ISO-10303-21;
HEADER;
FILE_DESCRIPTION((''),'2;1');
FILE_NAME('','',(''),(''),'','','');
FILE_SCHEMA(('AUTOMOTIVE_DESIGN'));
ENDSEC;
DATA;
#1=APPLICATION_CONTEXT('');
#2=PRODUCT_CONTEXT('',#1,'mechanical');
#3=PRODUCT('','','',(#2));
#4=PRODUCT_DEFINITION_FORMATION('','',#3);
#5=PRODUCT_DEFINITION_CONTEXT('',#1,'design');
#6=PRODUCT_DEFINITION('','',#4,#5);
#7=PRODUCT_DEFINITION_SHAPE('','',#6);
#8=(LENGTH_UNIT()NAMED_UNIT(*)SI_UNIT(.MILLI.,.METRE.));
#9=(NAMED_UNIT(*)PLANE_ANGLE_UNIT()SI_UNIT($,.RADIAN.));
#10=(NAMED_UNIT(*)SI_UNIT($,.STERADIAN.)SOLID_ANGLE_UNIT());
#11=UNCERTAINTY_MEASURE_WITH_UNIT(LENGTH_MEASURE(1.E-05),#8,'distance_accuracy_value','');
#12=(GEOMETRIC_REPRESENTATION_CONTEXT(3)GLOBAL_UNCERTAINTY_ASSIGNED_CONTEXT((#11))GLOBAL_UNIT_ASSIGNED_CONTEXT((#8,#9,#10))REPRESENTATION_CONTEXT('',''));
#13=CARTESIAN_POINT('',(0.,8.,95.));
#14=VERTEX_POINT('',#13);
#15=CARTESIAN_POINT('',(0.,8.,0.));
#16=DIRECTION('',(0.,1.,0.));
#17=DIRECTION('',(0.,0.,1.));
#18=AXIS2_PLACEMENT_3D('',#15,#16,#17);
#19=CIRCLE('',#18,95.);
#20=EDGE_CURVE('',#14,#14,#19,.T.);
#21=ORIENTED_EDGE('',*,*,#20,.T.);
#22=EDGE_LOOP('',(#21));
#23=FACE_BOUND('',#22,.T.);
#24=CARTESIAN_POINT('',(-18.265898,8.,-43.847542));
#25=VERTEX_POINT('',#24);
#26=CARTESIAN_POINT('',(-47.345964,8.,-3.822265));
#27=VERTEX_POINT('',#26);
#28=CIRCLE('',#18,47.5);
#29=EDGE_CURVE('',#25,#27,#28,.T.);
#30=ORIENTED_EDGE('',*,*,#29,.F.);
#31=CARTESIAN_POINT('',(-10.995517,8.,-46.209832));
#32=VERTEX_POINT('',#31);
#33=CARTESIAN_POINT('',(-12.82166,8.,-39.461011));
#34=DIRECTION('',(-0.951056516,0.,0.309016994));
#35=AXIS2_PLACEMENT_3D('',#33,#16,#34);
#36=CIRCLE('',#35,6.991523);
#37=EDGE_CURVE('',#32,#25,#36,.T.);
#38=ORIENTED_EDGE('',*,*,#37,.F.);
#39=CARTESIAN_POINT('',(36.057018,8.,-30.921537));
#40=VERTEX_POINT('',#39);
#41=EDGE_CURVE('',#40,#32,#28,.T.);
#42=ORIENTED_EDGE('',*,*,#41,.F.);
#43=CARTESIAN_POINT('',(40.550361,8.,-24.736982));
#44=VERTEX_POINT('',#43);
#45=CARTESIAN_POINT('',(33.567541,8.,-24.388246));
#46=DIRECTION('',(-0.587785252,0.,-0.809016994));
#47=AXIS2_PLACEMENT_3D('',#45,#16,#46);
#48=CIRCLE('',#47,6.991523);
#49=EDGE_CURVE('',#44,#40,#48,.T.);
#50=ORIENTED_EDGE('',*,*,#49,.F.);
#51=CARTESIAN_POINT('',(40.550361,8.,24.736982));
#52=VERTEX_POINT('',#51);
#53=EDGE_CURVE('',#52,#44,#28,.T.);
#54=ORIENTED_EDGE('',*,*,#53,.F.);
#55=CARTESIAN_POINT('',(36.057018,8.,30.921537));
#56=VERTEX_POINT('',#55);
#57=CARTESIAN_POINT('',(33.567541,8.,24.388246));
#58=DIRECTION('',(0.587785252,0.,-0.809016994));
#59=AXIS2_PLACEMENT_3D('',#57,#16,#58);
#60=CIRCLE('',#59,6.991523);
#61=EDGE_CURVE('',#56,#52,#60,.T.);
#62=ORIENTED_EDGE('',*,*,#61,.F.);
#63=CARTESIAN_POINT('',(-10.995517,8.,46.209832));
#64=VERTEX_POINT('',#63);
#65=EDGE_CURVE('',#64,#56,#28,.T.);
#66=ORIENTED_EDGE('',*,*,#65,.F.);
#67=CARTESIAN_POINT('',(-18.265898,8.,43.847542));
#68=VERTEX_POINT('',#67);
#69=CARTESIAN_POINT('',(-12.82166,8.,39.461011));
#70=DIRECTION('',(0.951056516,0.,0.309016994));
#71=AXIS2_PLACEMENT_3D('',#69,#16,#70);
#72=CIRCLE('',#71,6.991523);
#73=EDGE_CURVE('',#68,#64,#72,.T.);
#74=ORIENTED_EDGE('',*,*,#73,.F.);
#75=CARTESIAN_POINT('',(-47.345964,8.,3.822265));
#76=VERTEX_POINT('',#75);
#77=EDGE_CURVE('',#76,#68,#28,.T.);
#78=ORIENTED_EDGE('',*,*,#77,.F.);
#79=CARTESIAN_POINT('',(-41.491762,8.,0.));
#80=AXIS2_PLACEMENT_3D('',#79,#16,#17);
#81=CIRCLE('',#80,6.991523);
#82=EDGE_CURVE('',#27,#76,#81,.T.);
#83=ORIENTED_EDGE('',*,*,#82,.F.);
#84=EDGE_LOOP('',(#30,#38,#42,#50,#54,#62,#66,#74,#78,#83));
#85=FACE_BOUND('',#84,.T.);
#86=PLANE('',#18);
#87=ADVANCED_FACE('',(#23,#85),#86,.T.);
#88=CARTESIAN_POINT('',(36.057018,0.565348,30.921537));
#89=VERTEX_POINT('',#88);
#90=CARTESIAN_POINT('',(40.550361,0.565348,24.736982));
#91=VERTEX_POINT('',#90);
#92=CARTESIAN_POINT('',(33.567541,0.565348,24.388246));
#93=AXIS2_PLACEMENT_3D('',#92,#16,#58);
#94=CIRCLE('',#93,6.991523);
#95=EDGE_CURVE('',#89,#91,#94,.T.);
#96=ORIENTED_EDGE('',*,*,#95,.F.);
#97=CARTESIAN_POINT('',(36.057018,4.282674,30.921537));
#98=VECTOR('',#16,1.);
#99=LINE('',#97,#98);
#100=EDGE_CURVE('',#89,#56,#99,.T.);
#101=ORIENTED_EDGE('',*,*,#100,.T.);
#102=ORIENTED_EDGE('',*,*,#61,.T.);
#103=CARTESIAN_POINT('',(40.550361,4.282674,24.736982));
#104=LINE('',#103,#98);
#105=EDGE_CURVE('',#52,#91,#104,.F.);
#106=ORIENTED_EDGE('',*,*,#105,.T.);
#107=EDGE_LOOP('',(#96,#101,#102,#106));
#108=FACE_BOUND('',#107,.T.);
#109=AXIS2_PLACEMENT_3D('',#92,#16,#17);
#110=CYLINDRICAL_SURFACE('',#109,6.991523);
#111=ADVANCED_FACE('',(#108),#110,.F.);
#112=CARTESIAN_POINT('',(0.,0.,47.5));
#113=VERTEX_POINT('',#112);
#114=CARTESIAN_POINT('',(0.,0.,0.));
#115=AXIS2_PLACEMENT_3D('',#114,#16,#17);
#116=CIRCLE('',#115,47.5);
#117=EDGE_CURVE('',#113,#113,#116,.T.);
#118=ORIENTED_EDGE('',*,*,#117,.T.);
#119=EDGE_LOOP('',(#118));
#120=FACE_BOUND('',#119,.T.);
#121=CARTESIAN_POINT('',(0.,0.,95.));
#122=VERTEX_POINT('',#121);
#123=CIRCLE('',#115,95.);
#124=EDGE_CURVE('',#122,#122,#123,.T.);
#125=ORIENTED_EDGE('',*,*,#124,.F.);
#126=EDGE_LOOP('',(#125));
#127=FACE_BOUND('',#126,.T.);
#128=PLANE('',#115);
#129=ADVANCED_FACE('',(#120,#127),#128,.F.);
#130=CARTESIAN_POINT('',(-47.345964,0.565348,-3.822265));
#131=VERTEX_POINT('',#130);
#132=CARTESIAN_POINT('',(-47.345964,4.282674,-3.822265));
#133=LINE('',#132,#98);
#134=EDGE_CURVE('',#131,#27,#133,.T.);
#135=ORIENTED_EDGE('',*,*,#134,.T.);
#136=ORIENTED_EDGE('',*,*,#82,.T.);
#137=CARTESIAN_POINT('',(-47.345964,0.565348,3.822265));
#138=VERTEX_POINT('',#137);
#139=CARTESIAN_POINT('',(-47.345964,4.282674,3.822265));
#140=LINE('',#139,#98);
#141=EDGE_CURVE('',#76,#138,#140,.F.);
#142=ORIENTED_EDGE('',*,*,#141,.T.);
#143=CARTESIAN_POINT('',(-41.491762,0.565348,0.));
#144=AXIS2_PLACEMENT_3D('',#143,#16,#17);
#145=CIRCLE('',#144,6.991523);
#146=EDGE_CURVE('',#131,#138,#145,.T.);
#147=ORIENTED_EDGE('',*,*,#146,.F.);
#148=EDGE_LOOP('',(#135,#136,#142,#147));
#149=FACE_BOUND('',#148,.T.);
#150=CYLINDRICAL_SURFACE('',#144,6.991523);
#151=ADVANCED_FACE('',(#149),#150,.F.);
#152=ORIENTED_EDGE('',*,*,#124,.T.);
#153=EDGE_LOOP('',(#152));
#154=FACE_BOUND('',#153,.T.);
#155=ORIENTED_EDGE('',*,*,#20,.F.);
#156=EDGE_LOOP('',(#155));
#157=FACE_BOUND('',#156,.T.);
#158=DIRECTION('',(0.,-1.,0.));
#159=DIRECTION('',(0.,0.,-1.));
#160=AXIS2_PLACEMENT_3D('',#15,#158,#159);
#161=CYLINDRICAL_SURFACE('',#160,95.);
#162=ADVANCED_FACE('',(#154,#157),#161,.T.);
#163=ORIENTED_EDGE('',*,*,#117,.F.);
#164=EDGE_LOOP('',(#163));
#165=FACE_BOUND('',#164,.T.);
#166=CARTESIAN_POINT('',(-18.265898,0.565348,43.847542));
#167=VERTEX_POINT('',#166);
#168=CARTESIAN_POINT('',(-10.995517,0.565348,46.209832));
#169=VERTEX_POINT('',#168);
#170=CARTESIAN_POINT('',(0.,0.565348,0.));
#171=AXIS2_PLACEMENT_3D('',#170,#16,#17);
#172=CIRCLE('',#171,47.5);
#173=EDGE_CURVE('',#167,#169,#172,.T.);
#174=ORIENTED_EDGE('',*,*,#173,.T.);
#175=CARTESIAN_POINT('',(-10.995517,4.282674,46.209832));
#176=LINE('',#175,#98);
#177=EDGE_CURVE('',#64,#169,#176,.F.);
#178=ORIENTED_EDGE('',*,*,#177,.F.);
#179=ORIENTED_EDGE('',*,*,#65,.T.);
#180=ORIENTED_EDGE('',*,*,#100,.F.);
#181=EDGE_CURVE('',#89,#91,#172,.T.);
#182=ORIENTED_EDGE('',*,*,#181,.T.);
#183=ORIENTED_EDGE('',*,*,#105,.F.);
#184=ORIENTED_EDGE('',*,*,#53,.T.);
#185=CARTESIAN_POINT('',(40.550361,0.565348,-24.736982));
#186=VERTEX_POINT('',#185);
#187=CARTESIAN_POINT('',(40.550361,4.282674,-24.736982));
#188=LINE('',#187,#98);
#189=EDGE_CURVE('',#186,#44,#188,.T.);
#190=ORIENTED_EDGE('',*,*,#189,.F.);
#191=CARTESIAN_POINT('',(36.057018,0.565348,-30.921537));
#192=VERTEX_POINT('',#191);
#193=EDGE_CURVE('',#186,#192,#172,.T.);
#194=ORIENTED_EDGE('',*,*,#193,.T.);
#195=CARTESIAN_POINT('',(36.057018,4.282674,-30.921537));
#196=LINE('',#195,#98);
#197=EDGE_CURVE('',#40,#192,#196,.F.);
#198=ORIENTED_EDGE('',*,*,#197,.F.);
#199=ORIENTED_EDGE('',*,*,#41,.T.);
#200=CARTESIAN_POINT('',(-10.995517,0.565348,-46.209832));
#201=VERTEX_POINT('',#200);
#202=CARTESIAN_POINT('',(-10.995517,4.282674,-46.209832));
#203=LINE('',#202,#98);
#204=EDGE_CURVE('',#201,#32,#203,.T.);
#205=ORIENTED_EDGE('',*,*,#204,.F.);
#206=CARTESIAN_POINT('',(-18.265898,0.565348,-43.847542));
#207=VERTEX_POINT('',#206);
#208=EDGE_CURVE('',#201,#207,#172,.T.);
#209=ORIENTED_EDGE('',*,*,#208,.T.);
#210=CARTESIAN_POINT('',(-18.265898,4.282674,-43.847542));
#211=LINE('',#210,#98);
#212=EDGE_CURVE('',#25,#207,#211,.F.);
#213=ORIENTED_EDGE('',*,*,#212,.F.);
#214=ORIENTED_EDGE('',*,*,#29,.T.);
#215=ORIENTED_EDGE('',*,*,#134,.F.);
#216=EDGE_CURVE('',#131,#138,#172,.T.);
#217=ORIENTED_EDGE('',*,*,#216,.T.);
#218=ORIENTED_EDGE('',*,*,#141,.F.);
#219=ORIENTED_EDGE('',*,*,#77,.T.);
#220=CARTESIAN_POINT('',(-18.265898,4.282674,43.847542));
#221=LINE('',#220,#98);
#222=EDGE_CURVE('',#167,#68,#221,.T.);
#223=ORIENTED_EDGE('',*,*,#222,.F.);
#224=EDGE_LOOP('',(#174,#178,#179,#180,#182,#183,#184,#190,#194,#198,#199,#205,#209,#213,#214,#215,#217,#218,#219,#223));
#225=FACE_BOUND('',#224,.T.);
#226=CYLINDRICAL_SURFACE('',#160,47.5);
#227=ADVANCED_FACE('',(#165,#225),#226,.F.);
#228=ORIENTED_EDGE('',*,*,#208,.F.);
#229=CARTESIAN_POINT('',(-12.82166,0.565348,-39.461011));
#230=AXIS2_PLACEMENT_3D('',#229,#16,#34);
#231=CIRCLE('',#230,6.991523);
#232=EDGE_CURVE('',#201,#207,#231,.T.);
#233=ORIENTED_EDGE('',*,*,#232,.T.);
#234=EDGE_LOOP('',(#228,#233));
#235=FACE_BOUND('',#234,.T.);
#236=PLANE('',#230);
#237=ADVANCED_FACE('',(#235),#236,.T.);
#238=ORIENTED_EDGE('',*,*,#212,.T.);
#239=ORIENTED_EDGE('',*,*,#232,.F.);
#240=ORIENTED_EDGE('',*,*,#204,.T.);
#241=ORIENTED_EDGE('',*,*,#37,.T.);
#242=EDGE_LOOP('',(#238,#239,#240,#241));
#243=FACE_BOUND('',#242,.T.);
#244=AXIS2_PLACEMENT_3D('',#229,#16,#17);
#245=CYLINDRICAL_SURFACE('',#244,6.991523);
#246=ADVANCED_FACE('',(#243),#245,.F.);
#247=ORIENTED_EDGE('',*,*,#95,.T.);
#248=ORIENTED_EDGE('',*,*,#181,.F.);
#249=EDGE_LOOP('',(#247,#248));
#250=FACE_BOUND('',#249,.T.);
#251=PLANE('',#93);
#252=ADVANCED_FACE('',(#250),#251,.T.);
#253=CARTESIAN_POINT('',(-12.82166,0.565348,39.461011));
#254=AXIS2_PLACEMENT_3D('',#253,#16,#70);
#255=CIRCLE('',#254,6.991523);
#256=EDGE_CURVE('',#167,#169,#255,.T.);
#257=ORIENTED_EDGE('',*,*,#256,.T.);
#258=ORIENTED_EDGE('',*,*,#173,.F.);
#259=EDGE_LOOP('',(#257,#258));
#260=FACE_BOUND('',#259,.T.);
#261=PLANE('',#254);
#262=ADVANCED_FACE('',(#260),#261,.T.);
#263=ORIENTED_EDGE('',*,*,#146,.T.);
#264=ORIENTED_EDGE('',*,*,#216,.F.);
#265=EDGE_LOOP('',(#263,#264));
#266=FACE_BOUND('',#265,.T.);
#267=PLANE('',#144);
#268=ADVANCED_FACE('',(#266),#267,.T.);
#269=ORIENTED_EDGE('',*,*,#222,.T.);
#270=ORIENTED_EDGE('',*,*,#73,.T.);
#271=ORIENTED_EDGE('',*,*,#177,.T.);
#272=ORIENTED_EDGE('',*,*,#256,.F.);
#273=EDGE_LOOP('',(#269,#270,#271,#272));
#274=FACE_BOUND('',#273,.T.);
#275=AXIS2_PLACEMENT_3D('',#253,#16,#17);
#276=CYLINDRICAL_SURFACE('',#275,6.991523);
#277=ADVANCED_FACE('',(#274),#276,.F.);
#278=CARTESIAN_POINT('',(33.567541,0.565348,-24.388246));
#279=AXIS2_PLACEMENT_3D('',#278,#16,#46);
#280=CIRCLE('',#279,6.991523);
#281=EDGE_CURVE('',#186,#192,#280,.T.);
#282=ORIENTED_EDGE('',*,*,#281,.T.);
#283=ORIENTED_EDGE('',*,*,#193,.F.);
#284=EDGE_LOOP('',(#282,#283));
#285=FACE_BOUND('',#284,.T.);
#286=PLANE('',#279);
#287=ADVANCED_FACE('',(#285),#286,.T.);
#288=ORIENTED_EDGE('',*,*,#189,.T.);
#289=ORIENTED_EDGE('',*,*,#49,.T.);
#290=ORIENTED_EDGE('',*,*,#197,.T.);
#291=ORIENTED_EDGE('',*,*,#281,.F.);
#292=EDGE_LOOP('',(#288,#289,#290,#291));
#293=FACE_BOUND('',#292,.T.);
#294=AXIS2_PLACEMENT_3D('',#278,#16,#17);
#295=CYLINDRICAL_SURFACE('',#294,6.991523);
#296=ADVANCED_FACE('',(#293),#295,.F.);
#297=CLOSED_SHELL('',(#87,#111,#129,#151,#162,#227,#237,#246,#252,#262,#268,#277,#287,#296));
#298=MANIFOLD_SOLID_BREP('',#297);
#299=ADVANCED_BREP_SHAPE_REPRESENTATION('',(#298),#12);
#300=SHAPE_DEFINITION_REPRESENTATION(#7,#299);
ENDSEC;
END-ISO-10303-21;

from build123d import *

# Parameters (mm, degrees)
SKETCH1_R           = 95
BOSS_EXTRUDE1_DEPTH = 8
SKETCH2_R           = 47.5
CUT_EXTRUDE1_DEPTH  = 135.588261004
SKETCH3_R           = 6.991522803
CUT_EXTRUDE2_DEPTH  = 7.434651836
CIRPATTERN1_COUNT   = 5


with BuildPart() as part:
    # Sketch1 → Boss-Extrude1 (new body)
    with BuildSketch(Plane(origin=(0, 0, 0), x_dir=(1, 0, 0), z_dir=(0, 1, 0))):
        Circle(SKETCH1_R)
    extrude(amount=BOSS_EXTRUDE1_DEPTH)

    # Sketch2 → Cut-Extrude1 (cut, through all)
    with BuildSketch(Plane(origin=(0, 0, 0), x_dir=(1, 0, 0), z_dir=(0, 1, 0))):
        Circle(SKETCH2_R)
    extrude(amount=CUT_EXTRUDE1_DEPTH, mode=Mode.SUBTRACT)

    # Sketch3 → Cut-Extrude2 (cut)
    with BuildSketch(Plane(origin=(0, 8, 0), x_dir=(1, 0, 0), z_dir=(0, 1, 0))):
        with Locations((-41.491762002, 0)):
            Circle(SKETCH3_R)
    cut_extrude2 = extrude(amount=-CUT_EXTRUDE2_DEPTH, mode=Mode.SUBTRACT)

    # CirPattern1: Cut-Extrude2 ×5 about axis
    cirpattern1_axis = Axis((0, 0, 0), (0, 1, 0))
    for i in range(1, CIRPATTERN1_COUNT):
        add(cut_extrude2.rotate(cirpattern1_axis, i * 360 / CIRPATTERN1_COUNT), mode=Mode.SUBTRACT)


solid = part.part
